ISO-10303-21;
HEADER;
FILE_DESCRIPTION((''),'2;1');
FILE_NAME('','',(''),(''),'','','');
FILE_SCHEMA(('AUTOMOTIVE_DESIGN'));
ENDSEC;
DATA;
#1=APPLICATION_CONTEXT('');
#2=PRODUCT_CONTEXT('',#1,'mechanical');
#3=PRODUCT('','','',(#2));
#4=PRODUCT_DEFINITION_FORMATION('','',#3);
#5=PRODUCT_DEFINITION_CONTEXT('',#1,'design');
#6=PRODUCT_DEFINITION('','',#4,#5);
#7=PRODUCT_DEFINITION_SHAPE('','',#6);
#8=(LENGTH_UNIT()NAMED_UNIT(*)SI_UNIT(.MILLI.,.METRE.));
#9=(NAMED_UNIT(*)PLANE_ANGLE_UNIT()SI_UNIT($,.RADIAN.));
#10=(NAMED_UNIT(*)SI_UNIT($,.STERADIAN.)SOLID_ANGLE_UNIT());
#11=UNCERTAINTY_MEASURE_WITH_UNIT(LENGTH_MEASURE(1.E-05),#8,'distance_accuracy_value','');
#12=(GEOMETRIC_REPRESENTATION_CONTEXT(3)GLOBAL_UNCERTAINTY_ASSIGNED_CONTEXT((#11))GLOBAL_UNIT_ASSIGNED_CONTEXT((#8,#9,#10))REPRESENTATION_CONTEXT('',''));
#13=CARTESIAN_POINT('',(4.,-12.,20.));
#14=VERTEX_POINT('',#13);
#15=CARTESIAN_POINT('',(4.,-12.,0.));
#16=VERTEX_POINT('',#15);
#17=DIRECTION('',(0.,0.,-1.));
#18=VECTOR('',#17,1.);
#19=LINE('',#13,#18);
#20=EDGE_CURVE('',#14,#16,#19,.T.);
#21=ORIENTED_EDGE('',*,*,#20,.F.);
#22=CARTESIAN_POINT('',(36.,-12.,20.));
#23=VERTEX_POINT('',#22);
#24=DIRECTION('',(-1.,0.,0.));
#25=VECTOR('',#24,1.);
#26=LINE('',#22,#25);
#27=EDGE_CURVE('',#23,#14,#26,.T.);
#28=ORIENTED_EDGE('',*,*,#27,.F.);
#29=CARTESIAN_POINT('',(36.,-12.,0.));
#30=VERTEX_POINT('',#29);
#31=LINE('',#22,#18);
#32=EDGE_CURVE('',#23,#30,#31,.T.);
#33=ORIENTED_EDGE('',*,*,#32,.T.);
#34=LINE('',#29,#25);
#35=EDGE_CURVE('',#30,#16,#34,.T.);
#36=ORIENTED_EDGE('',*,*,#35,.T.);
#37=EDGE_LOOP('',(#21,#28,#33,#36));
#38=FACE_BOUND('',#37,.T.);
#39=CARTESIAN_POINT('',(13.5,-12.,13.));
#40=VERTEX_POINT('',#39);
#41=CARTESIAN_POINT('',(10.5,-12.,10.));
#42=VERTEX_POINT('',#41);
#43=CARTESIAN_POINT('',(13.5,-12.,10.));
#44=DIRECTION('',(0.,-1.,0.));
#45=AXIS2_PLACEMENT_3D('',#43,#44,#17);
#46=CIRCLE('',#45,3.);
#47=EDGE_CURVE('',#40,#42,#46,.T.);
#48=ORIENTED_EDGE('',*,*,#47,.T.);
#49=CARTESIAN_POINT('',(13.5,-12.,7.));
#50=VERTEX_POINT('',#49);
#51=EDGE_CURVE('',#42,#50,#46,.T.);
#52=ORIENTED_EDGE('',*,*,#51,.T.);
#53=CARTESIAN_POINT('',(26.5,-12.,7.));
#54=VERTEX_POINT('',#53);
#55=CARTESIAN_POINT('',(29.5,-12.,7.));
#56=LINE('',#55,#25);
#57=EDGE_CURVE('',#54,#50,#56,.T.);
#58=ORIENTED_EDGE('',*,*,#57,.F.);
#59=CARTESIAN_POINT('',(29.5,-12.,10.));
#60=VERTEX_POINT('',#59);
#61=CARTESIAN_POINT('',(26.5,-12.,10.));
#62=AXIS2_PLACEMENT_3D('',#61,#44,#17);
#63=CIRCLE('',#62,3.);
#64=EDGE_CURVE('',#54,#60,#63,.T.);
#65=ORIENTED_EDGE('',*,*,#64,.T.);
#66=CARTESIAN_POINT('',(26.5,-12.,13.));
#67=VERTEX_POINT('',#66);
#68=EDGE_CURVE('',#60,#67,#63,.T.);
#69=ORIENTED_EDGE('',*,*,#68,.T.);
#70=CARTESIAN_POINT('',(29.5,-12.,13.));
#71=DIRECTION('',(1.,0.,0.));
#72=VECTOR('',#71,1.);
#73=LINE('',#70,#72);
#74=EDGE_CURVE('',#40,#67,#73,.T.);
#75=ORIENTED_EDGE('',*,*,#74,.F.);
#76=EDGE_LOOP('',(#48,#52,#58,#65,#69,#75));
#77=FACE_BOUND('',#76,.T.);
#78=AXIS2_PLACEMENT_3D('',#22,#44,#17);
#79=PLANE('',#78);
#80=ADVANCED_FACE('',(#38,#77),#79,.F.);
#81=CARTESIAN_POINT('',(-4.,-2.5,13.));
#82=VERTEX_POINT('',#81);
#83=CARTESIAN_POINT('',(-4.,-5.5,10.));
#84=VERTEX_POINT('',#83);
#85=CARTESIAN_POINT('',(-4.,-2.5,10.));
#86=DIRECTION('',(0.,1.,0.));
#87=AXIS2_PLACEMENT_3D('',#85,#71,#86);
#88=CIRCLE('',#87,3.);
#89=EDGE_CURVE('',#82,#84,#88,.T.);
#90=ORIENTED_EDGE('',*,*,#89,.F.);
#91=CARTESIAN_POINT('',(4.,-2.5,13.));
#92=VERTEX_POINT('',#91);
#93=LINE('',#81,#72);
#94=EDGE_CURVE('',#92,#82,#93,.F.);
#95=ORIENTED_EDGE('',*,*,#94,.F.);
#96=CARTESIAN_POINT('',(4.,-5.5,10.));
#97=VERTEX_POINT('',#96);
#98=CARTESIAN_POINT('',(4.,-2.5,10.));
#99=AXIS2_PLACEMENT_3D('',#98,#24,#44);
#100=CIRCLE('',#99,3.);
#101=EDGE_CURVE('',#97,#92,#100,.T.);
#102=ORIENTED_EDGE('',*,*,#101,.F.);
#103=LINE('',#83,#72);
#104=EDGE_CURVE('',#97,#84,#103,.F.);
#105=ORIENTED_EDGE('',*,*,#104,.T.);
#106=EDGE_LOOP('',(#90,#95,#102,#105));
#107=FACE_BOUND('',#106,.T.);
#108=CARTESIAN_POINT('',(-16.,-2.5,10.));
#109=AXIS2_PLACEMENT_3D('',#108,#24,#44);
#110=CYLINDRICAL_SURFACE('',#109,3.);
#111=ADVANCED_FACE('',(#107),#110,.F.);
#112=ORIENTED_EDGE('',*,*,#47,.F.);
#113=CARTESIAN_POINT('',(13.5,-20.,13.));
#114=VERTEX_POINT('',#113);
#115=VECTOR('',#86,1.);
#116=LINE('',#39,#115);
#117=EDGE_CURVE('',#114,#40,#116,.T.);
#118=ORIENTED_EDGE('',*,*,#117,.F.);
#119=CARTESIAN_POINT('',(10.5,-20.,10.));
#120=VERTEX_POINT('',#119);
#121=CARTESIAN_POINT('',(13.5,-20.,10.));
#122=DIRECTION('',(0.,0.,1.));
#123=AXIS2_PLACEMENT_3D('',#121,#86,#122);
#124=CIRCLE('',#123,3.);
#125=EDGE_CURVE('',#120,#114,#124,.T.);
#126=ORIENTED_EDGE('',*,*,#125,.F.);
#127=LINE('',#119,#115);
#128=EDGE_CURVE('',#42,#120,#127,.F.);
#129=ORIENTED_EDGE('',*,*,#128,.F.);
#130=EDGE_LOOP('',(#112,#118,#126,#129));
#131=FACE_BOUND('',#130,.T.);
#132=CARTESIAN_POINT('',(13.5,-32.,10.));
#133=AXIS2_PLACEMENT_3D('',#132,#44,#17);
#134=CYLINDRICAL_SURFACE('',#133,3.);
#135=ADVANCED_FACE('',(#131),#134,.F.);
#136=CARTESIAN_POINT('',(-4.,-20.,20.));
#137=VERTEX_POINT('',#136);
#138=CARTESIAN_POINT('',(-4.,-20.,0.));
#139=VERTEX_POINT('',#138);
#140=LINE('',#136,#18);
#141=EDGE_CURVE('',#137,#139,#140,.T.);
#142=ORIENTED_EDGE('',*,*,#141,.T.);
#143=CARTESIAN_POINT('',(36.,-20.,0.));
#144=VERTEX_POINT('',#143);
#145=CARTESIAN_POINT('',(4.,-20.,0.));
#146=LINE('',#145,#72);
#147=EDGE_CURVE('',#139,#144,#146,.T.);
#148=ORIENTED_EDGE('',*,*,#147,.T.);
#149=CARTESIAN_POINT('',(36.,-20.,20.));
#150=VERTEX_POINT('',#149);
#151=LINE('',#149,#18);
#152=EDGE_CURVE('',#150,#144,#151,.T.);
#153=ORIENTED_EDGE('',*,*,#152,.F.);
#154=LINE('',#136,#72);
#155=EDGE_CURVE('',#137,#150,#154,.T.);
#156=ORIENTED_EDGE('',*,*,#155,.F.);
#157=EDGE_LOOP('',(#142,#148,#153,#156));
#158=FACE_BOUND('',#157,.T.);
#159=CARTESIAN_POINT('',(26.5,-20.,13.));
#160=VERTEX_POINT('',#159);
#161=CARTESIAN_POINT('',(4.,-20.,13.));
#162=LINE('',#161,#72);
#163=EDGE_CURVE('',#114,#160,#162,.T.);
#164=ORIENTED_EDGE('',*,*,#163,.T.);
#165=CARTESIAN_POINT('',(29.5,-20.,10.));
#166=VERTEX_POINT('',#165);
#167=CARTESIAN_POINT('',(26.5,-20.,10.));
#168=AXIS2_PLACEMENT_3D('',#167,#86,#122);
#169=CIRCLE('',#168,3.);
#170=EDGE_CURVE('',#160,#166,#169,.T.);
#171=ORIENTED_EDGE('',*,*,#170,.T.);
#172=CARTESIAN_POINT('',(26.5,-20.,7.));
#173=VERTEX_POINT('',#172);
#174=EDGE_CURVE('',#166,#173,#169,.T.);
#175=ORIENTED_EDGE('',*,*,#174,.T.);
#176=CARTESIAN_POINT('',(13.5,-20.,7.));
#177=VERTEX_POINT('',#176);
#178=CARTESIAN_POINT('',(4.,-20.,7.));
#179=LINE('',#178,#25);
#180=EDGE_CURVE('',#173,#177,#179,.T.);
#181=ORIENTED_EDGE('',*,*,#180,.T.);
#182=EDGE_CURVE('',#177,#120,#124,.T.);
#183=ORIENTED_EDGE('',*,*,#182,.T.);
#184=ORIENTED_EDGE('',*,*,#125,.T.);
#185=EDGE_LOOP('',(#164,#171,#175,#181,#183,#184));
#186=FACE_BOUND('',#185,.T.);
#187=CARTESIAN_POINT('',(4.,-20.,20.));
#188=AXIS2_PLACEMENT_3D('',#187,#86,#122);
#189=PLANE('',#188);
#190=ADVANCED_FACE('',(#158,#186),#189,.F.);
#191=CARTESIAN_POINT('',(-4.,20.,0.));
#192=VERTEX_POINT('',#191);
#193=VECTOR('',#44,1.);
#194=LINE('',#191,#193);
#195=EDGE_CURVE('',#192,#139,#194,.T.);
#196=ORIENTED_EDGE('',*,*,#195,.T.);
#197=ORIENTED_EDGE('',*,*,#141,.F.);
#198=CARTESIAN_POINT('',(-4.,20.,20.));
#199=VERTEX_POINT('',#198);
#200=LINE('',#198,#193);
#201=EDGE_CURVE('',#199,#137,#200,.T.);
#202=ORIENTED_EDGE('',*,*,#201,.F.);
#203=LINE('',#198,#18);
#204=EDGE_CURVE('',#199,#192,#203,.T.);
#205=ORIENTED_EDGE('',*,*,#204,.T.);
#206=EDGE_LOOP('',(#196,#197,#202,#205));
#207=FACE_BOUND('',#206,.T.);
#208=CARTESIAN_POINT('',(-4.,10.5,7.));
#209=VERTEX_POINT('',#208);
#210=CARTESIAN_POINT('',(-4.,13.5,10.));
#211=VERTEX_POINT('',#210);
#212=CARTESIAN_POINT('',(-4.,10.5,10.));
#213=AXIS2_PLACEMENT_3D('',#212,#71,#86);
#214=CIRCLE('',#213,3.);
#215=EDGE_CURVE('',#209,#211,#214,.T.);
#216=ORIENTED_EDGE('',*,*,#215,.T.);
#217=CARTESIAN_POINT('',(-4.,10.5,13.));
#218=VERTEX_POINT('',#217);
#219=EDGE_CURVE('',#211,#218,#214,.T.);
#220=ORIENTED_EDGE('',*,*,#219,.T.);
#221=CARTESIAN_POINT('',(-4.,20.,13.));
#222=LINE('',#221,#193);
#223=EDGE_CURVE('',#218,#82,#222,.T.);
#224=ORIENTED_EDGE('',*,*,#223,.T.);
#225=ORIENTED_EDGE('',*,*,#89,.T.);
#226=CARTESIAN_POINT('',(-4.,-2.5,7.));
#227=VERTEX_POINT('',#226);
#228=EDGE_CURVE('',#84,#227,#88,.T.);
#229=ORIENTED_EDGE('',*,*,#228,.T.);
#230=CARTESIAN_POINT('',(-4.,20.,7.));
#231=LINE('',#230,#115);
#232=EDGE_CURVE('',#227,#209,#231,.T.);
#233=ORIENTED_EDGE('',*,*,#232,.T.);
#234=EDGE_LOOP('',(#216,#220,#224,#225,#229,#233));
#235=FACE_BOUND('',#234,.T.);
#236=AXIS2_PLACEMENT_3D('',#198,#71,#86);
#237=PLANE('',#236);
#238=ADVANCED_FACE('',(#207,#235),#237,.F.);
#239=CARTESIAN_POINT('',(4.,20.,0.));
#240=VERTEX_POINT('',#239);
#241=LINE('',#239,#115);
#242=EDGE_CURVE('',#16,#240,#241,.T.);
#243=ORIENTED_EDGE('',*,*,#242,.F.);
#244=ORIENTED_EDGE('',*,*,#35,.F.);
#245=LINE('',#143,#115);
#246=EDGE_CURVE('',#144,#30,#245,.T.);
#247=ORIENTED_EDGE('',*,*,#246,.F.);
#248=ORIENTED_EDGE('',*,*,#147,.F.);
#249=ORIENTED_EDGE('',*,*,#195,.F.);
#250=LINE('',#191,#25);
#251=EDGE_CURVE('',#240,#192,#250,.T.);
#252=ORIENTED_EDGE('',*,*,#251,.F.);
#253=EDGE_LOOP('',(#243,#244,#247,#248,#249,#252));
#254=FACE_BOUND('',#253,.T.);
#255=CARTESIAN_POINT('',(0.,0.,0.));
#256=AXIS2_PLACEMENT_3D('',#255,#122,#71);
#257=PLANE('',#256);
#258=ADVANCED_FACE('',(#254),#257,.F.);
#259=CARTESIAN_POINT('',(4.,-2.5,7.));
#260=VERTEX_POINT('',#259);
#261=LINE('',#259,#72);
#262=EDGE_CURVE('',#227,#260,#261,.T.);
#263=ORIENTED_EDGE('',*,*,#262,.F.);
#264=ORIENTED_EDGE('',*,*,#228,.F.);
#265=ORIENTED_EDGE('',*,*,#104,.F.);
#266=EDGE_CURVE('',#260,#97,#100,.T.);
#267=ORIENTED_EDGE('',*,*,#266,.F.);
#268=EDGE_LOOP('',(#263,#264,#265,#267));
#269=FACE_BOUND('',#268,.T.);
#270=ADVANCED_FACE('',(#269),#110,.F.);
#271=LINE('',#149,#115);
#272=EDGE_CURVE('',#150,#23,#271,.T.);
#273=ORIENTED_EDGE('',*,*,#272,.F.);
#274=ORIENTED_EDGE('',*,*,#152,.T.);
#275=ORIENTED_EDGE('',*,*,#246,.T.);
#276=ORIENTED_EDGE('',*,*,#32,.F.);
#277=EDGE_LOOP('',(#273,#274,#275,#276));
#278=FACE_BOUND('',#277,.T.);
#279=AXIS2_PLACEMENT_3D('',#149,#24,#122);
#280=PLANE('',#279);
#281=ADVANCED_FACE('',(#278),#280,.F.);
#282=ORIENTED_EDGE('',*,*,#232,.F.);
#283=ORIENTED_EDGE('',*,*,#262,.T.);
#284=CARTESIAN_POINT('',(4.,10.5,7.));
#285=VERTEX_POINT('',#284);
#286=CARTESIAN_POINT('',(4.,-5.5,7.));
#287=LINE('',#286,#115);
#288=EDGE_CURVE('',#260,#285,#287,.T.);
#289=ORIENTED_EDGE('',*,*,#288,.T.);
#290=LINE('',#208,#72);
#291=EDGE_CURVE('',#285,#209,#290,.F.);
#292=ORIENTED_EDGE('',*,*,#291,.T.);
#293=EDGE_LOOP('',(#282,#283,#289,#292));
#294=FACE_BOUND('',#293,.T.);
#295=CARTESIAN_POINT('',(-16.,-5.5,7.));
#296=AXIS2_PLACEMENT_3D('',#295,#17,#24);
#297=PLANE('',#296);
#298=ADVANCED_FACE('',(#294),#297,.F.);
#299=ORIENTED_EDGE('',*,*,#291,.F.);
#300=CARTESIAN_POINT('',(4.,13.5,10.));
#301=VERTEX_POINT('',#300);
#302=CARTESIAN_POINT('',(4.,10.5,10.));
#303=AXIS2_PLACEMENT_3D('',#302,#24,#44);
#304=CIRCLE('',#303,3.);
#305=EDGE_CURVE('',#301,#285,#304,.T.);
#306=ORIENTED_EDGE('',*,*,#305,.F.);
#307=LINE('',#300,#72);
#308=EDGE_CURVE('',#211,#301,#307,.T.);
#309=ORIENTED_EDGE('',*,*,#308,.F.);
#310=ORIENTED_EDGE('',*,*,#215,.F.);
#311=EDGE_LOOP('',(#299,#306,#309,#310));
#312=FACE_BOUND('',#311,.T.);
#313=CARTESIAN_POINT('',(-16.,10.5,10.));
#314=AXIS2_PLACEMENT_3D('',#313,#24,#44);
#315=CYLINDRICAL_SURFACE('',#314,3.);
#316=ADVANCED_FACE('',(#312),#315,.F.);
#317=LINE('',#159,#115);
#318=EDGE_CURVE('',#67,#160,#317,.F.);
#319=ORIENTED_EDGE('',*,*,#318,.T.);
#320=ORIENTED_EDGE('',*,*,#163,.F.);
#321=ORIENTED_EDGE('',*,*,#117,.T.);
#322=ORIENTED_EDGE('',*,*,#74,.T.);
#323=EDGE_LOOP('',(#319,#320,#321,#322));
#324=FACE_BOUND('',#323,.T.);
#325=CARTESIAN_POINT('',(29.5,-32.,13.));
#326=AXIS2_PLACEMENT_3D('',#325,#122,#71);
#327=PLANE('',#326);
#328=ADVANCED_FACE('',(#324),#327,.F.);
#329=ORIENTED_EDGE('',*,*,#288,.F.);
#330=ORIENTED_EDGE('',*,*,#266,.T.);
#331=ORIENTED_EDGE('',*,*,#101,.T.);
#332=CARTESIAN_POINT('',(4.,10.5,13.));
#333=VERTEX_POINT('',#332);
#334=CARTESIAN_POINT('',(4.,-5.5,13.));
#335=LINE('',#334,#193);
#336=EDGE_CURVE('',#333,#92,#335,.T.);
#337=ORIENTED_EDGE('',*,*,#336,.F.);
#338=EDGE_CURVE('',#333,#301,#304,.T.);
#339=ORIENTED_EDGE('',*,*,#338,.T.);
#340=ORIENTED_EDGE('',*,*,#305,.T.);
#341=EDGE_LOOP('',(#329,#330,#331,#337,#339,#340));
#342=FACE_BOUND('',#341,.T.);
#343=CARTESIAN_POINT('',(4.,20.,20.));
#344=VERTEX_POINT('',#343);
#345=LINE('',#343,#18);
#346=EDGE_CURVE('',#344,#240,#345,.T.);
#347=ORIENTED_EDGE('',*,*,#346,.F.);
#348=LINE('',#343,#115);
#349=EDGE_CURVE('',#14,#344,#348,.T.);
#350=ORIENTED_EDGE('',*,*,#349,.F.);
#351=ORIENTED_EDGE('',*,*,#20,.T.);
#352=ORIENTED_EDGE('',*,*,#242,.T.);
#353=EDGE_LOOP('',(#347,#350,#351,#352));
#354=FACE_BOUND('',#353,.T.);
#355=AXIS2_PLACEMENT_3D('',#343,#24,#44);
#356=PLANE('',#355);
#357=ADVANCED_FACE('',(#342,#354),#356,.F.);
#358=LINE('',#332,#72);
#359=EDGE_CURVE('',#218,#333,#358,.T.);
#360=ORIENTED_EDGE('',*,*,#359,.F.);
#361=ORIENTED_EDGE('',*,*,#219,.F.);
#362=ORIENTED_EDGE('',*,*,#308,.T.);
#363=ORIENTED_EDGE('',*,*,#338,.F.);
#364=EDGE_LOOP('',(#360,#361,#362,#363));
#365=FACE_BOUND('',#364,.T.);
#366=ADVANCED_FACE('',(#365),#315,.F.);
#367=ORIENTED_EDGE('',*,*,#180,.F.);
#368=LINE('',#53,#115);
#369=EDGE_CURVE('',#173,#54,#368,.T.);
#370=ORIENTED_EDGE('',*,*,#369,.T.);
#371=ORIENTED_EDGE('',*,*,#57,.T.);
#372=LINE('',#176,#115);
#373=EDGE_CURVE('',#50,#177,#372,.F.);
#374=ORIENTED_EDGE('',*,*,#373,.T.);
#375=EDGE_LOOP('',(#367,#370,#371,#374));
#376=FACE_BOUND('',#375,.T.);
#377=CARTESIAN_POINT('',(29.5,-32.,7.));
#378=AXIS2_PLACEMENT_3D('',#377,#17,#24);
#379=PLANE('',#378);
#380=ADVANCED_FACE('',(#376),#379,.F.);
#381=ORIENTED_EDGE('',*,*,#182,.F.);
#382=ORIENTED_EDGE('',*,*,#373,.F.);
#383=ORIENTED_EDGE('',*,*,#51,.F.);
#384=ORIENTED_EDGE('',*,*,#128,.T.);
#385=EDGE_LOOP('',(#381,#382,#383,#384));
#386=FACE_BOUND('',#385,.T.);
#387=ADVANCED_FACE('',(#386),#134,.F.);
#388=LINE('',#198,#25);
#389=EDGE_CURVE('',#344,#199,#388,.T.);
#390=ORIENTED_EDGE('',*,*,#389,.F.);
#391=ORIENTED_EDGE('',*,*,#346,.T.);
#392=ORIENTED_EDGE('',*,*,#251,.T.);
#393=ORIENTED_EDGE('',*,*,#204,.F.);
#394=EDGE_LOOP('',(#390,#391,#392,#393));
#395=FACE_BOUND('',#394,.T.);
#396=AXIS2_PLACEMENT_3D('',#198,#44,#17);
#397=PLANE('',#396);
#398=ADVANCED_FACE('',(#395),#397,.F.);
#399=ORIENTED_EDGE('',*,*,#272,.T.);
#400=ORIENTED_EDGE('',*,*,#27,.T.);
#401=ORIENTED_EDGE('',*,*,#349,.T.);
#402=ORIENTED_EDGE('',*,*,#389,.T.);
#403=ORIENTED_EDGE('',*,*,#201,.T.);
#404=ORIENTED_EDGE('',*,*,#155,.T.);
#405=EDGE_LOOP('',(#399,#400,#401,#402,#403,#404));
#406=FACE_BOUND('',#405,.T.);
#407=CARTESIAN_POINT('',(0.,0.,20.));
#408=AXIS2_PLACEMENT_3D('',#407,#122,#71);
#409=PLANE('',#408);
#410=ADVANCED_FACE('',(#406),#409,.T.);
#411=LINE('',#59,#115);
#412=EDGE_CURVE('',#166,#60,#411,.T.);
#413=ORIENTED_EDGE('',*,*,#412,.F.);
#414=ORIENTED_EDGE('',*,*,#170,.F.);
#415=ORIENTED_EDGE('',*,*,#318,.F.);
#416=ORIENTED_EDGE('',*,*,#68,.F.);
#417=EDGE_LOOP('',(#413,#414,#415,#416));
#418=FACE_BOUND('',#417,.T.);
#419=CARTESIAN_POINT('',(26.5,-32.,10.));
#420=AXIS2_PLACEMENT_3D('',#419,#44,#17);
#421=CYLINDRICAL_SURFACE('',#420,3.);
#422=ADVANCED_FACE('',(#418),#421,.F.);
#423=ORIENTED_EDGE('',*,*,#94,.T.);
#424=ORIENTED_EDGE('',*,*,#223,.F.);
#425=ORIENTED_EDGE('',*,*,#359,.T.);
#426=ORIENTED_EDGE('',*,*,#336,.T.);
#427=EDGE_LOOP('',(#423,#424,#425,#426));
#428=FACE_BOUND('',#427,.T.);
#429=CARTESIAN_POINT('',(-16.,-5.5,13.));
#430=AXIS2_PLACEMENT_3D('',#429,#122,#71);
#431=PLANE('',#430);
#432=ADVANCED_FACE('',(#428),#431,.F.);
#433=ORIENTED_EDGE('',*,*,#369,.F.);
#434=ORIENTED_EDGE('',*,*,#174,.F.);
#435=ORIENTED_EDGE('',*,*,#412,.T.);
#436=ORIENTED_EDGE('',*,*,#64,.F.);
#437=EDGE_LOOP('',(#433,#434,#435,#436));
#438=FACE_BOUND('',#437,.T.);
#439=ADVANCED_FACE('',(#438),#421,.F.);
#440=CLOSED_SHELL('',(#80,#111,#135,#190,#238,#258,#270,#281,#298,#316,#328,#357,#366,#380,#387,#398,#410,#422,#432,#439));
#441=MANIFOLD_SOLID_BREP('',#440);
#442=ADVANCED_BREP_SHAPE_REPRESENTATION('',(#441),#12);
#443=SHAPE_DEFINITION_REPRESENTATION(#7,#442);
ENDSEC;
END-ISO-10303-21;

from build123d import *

# Parameters (mm, degrees)
BOSS_EXTRUDE1_DEPTH = 20
SKETCH2_W           = 19
SKETCH2_H           = 6
CUT_EXTRUDE1_DEPTH  = 20
SKETCH3_W           = 6
SKETCH3_H           = 19
CUT_EXTRUDE2_DEPTH  = 20
FILLET1_R           = 3


with BuildPart() as part:
    # Sketch1 → Boss-Extrude1 (new body)
    with BuildSketch(Plane.XY):
        Polygon((4, -20), (36, -20), (36, -12), (4, -12), (4, 20), (-4, 20), (-4, -20), align=None)
    extrude(amount=BOSS_EXTRUDE1_DEPTH)

    # Sketch2 → Cut-Extrude1 (cut)
    with BuildSketch(Plane(origin=(0, -12, 0), x_dir=(1, 0, 0), z_dir=(0, 1, 0))):
        with Locations((20, -10)):
            Rectangle(SKETCH2_W, SKETCH2_H)
    extrude(amount=-CUT_EXTRUDE1_DEPTH, mode=Mode.SUBTRACT)

    # Sketch3 → Cut-Extrude2 (cut)
    with BuildSketch(Plane(origin=(4, 0, 0), x_dir=(0, 0, -1), z_dir=(1, 0, 0))):
        with Locations((-10, 4)):
            Rectangle(SKETCH3_W, SKETCH3_H)
    extrude(amount=-CUT_EXTRUDE2_DEPTH, mode=Mode.SUBTRACT)

    # Fillet1
    fillet1_edges = [part.edges().sort_by_distance(p)[0] for p in [
        (29.5, -16, 7),
        (29.5, -16, 13),
        (10.5, -16, 7),
        (10.5, -16, 13),
        (0, -5.5, 13),
        (0, -5.5, 7),
        (0, 13.5, 13),
        (0, 13.5, 7),
    ]]
    fillet(fillet1_edges, radius=FILLET1_R - 0.0001)  # a hair under: the kernel refuses the full size


solid = part.part
